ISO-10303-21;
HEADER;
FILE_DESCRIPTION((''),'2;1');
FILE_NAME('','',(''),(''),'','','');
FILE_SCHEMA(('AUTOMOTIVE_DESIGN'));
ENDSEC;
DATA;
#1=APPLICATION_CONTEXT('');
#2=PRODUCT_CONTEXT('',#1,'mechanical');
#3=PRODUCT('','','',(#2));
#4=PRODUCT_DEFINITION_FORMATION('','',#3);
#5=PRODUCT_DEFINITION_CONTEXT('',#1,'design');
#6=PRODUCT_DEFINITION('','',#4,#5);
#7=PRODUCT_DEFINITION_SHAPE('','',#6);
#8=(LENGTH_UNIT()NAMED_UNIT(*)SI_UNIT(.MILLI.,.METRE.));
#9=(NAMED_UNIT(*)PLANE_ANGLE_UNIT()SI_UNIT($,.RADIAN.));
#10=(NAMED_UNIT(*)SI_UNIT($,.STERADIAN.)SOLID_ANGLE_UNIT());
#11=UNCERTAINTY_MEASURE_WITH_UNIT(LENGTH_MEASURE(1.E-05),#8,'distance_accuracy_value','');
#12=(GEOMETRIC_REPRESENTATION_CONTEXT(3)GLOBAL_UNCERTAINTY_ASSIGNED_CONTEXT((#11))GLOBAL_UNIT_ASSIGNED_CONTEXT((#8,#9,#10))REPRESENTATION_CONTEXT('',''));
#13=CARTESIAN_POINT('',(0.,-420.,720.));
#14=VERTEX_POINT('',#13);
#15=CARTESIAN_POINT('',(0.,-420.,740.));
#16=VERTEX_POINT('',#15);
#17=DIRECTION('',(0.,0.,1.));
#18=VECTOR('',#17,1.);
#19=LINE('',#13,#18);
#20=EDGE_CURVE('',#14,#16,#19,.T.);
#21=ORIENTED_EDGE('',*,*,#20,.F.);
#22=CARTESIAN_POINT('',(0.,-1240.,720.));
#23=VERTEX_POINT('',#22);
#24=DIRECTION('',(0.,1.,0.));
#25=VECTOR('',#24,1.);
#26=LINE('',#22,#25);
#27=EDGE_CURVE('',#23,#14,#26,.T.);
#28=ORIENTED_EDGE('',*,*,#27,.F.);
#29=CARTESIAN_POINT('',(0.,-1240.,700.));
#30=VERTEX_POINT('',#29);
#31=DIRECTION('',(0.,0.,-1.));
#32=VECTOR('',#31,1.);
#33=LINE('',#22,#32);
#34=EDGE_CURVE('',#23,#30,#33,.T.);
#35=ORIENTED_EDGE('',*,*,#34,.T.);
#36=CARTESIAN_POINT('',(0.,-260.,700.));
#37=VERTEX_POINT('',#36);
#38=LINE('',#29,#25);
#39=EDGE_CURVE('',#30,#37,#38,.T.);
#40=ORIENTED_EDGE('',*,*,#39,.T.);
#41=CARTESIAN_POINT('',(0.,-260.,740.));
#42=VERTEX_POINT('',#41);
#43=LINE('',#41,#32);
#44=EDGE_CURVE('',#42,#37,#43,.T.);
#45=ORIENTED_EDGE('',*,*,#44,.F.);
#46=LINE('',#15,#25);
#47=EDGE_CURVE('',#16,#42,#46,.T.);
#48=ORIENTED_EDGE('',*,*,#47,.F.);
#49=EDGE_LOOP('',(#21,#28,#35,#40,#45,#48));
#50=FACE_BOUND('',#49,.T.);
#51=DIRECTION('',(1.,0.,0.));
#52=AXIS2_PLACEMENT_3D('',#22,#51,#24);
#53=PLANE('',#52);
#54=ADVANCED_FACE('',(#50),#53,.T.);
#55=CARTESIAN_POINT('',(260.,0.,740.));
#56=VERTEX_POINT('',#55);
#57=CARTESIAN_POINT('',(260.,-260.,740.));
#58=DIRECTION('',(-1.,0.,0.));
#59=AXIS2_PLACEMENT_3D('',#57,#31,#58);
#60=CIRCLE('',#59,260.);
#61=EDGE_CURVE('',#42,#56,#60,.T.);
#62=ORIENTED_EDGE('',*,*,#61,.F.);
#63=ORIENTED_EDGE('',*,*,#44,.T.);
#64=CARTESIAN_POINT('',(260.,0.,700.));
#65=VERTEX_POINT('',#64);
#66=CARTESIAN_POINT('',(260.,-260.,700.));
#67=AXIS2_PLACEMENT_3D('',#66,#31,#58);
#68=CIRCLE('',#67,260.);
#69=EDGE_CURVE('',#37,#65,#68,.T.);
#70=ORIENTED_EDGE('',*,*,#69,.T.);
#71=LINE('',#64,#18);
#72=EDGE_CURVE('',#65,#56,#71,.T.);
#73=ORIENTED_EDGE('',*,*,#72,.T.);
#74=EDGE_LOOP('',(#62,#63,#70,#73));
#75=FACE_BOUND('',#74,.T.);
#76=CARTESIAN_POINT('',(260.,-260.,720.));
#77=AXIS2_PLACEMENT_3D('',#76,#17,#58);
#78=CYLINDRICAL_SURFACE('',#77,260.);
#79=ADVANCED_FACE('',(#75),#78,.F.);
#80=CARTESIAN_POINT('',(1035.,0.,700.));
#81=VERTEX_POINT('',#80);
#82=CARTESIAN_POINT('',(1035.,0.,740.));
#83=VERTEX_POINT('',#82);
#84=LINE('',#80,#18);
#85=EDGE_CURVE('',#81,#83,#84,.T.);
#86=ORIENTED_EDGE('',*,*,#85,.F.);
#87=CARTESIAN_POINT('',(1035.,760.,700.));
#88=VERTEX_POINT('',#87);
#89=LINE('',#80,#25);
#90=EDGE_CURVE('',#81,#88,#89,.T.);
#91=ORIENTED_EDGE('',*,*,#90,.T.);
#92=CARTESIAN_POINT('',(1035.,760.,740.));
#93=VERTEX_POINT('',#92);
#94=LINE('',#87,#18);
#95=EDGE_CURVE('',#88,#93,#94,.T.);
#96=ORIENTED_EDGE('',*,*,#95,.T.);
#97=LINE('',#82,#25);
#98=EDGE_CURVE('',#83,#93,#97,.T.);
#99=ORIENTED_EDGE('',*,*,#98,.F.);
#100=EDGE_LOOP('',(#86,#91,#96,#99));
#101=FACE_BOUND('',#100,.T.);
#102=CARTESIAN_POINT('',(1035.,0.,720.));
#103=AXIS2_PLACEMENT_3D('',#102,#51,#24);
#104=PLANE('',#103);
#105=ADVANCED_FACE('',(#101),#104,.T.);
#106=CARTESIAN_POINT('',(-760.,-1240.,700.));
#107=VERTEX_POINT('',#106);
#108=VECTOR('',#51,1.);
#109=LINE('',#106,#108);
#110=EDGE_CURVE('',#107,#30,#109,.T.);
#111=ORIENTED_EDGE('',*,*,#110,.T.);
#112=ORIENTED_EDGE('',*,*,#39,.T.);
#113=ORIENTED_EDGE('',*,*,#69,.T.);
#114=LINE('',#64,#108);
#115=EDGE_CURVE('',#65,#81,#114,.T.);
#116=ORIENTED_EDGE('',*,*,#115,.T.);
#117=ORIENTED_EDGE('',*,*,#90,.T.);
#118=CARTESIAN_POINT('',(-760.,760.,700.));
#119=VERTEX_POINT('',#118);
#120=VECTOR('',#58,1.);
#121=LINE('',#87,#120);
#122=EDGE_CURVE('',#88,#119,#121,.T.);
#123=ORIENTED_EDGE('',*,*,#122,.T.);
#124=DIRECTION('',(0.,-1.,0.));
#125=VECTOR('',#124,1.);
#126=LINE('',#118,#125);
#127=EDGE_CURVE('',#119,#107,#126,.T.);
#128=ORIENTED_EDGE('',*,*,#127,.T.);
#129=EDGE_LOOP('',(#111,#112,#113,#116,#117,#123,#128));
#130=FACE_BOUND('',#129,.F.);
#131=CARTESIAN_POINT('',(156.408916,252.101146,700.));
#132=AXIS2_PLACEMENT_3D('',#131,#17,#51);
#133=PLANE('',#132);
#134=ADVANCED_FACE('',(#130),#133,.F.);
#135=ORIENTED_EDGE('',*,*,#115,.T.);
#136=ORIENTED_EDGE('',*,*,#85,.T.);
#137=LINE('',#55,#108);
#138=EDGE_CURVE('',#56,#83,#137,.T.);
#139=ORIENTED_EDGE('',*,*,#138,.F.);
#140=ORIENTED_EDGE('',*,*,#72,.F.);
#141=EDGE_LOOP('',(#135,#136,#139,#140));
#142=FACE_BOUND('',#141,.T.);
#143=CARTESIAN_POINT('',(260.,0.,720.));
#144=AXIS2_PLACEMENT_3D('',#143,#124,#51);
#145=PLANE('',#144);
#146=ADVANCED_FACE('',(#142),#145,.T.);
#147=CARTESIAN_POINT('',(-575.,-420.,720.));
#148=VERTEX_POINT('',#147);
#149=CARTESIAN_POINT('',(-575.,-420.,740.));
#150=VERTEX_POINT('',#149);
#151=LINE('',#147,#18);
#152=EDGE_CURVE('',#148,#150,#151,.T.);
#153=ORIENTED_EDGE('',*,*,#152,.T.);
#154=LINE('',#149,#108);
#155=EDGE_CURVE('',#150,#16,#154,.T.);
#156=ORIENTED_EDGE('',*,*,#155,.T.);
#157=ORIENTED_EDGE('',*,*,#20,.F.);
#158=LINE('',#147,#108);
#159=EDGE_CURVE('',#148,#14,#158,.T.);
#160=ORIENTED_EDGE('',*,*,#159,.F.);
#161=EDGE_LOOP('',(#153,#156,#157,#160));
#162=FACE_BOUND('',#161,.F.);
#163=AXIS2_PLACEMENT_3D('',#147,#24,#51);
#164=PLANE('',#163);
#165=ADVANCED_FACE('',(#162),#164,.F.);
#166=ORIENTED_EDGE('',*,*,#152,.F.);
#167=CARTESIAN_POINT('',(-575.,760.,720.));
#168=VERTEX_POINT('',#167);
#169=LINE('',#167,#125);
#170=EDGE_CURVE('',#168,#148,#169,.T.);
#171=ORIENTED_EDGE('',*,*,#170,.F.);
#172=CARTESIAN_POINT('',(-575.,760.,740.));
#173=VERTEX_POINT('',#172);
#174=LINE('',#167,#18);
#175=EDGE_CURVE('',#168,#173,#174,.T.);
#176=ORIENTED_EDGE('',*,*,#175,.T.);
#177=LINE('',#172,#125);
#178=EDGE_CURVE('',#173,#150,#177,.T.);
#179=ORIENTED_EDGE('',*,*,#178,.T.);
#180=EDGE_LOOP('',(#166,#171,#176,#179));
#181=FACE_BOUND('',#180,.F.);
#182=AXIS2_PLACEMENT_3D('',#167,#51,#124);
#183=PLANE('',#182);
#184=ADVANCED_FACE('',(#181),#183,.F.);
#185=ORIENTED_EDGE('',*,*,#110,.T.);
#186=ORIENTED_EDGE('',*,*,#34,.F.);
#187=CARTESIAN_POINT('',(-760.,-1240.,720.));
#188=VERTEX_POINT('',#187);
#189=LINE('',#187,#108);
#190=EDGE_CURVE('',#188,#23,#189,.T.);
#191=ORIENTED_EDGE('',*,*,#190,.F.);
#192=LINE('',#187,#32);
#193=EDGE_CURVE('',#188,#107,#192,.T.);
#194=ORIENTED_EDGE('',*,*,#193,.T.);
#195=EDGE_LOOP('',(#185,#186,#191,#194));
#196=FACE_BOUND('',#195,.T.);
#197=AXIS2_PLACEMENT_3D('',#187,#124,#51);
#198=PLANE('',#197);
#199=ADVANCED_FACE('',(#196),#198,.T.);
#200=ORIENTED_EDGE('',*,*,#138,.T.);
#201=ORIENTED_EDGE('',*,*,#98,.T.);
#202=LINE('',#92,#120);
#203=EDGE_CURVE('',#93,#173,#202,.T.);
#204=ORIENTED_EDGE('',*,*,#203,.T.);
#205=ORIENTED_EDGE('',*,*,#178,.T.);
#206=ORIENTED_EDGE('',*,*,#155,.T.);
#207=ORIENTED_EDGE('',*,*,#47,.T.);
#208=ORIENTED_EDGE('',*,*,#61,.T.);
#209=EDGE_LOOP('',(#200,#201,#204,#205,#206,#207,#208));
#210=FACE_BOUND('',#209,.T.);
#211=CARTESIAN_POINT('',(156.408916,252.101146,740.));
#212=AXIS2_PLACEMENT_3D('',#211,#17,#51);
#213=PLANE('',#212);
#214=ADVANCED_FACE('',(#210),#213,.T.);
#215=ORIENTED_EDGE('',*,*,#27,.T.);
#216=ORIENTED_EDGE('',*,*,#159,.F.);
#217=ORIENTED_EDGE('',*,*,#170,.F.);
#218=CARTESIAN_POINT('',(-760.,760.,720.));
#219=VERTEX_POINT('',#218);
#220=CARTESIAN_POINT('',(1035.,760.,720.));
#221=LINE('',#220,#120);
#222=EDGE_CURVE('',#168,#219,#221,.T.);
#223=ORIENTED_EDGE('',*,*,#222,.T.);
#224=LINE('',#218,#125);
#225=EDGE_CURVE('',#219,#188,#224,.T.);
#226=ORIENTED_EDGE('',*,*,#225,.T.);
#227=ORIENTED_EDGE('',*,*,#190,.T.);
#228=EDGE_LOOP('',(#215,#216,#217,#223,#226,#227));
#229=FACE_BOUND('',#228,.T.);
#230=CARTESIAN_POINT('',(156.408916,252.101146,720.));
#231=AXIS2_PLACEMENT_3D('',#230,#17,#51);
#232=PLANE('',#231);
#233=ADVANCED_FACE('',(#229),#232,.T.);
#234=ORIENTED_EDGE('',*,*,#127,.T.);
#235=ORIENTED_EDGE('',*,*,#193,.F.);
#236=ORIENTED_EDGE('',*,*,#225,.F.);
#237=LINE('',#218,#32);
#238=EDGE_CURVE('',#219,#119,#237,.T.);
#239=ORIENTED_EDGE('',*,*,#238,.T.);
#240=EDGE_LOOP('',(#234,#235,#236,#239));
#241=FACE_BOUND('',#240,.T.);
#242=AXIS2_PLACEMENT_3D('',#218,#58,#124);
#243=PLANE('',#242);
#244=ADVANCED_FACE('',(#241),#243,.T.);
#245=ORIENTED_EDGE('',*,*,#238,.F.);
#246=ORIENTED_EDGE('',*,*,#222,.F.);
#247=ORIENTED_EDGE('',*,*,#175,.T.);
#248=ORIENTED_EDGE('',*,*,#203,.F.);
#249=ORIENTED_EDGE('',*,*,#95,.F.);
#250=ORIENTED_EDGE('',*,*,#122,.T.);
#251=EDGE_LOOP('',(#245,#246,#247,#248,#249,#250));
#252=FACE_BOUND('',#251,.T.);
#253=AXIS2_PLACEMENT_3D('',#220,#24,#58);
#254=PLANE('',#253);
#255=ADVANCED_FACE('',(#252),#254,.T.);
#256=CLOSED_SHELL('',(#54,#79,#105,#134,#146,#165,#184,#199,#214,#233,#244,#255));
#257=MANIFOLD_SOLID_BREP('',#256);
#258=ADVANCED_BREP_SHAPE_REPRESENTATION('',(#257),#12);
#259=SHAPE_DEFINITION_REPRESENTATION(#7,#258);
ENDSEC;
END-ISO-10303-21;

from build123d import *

# Parameters (mm, degrees)
F5_DEPTH = 20
F6_DEPTH = 20


# Not quite as in the source:
# - the program builds the solid bodies; features that only make, move or delete a surface that nothing else refers to are left out


with BuildPart() as f5:
    # F4 (on offset) → F5 (new body)
    with BuildSketch(Plane.XY.offset(720)):
        with BuildLine():
            ThreePointArc((0, -260), (76.1522368915, -76.1522368915), (260, 0))
            Line((260, 0), (1035, 0))
            Line((1035, 0), (1035, 760))
            Line((1035, 760), (-575, 760))
            Line((-575, 760), (-575, -420))
            Line((-575, -420), (0, -420))
            Line((0, -420), (0, -260))
        make_face()
    extrude(amount=F5_DEPTH)

    # F4 (on offset) → F6 (join)
    with BuildSketch(Plane.XY.offset(720)):
        with BuildLine():
            ThreePointArc((0, -260), (76.1522368915, -76.1522368915), (260, 0))
            Line((260, 0), (1035, 0))
            Line((1035, 0), (1035, 760))
            Line((1035, 760), (-575, 760))
            Line((-575, 760), (-575, -420))
            Line((-575, -420), (0, -420))
            Line((0, -420), (0, -260))
        make_face()
        Polygon((0, -1240), (0, -420), (-575, -420), (-575, 760), (-760, 760), (-760, -1240), align=None)
    extrude(amount=-F6_DEPTH)


solid = f5.part
